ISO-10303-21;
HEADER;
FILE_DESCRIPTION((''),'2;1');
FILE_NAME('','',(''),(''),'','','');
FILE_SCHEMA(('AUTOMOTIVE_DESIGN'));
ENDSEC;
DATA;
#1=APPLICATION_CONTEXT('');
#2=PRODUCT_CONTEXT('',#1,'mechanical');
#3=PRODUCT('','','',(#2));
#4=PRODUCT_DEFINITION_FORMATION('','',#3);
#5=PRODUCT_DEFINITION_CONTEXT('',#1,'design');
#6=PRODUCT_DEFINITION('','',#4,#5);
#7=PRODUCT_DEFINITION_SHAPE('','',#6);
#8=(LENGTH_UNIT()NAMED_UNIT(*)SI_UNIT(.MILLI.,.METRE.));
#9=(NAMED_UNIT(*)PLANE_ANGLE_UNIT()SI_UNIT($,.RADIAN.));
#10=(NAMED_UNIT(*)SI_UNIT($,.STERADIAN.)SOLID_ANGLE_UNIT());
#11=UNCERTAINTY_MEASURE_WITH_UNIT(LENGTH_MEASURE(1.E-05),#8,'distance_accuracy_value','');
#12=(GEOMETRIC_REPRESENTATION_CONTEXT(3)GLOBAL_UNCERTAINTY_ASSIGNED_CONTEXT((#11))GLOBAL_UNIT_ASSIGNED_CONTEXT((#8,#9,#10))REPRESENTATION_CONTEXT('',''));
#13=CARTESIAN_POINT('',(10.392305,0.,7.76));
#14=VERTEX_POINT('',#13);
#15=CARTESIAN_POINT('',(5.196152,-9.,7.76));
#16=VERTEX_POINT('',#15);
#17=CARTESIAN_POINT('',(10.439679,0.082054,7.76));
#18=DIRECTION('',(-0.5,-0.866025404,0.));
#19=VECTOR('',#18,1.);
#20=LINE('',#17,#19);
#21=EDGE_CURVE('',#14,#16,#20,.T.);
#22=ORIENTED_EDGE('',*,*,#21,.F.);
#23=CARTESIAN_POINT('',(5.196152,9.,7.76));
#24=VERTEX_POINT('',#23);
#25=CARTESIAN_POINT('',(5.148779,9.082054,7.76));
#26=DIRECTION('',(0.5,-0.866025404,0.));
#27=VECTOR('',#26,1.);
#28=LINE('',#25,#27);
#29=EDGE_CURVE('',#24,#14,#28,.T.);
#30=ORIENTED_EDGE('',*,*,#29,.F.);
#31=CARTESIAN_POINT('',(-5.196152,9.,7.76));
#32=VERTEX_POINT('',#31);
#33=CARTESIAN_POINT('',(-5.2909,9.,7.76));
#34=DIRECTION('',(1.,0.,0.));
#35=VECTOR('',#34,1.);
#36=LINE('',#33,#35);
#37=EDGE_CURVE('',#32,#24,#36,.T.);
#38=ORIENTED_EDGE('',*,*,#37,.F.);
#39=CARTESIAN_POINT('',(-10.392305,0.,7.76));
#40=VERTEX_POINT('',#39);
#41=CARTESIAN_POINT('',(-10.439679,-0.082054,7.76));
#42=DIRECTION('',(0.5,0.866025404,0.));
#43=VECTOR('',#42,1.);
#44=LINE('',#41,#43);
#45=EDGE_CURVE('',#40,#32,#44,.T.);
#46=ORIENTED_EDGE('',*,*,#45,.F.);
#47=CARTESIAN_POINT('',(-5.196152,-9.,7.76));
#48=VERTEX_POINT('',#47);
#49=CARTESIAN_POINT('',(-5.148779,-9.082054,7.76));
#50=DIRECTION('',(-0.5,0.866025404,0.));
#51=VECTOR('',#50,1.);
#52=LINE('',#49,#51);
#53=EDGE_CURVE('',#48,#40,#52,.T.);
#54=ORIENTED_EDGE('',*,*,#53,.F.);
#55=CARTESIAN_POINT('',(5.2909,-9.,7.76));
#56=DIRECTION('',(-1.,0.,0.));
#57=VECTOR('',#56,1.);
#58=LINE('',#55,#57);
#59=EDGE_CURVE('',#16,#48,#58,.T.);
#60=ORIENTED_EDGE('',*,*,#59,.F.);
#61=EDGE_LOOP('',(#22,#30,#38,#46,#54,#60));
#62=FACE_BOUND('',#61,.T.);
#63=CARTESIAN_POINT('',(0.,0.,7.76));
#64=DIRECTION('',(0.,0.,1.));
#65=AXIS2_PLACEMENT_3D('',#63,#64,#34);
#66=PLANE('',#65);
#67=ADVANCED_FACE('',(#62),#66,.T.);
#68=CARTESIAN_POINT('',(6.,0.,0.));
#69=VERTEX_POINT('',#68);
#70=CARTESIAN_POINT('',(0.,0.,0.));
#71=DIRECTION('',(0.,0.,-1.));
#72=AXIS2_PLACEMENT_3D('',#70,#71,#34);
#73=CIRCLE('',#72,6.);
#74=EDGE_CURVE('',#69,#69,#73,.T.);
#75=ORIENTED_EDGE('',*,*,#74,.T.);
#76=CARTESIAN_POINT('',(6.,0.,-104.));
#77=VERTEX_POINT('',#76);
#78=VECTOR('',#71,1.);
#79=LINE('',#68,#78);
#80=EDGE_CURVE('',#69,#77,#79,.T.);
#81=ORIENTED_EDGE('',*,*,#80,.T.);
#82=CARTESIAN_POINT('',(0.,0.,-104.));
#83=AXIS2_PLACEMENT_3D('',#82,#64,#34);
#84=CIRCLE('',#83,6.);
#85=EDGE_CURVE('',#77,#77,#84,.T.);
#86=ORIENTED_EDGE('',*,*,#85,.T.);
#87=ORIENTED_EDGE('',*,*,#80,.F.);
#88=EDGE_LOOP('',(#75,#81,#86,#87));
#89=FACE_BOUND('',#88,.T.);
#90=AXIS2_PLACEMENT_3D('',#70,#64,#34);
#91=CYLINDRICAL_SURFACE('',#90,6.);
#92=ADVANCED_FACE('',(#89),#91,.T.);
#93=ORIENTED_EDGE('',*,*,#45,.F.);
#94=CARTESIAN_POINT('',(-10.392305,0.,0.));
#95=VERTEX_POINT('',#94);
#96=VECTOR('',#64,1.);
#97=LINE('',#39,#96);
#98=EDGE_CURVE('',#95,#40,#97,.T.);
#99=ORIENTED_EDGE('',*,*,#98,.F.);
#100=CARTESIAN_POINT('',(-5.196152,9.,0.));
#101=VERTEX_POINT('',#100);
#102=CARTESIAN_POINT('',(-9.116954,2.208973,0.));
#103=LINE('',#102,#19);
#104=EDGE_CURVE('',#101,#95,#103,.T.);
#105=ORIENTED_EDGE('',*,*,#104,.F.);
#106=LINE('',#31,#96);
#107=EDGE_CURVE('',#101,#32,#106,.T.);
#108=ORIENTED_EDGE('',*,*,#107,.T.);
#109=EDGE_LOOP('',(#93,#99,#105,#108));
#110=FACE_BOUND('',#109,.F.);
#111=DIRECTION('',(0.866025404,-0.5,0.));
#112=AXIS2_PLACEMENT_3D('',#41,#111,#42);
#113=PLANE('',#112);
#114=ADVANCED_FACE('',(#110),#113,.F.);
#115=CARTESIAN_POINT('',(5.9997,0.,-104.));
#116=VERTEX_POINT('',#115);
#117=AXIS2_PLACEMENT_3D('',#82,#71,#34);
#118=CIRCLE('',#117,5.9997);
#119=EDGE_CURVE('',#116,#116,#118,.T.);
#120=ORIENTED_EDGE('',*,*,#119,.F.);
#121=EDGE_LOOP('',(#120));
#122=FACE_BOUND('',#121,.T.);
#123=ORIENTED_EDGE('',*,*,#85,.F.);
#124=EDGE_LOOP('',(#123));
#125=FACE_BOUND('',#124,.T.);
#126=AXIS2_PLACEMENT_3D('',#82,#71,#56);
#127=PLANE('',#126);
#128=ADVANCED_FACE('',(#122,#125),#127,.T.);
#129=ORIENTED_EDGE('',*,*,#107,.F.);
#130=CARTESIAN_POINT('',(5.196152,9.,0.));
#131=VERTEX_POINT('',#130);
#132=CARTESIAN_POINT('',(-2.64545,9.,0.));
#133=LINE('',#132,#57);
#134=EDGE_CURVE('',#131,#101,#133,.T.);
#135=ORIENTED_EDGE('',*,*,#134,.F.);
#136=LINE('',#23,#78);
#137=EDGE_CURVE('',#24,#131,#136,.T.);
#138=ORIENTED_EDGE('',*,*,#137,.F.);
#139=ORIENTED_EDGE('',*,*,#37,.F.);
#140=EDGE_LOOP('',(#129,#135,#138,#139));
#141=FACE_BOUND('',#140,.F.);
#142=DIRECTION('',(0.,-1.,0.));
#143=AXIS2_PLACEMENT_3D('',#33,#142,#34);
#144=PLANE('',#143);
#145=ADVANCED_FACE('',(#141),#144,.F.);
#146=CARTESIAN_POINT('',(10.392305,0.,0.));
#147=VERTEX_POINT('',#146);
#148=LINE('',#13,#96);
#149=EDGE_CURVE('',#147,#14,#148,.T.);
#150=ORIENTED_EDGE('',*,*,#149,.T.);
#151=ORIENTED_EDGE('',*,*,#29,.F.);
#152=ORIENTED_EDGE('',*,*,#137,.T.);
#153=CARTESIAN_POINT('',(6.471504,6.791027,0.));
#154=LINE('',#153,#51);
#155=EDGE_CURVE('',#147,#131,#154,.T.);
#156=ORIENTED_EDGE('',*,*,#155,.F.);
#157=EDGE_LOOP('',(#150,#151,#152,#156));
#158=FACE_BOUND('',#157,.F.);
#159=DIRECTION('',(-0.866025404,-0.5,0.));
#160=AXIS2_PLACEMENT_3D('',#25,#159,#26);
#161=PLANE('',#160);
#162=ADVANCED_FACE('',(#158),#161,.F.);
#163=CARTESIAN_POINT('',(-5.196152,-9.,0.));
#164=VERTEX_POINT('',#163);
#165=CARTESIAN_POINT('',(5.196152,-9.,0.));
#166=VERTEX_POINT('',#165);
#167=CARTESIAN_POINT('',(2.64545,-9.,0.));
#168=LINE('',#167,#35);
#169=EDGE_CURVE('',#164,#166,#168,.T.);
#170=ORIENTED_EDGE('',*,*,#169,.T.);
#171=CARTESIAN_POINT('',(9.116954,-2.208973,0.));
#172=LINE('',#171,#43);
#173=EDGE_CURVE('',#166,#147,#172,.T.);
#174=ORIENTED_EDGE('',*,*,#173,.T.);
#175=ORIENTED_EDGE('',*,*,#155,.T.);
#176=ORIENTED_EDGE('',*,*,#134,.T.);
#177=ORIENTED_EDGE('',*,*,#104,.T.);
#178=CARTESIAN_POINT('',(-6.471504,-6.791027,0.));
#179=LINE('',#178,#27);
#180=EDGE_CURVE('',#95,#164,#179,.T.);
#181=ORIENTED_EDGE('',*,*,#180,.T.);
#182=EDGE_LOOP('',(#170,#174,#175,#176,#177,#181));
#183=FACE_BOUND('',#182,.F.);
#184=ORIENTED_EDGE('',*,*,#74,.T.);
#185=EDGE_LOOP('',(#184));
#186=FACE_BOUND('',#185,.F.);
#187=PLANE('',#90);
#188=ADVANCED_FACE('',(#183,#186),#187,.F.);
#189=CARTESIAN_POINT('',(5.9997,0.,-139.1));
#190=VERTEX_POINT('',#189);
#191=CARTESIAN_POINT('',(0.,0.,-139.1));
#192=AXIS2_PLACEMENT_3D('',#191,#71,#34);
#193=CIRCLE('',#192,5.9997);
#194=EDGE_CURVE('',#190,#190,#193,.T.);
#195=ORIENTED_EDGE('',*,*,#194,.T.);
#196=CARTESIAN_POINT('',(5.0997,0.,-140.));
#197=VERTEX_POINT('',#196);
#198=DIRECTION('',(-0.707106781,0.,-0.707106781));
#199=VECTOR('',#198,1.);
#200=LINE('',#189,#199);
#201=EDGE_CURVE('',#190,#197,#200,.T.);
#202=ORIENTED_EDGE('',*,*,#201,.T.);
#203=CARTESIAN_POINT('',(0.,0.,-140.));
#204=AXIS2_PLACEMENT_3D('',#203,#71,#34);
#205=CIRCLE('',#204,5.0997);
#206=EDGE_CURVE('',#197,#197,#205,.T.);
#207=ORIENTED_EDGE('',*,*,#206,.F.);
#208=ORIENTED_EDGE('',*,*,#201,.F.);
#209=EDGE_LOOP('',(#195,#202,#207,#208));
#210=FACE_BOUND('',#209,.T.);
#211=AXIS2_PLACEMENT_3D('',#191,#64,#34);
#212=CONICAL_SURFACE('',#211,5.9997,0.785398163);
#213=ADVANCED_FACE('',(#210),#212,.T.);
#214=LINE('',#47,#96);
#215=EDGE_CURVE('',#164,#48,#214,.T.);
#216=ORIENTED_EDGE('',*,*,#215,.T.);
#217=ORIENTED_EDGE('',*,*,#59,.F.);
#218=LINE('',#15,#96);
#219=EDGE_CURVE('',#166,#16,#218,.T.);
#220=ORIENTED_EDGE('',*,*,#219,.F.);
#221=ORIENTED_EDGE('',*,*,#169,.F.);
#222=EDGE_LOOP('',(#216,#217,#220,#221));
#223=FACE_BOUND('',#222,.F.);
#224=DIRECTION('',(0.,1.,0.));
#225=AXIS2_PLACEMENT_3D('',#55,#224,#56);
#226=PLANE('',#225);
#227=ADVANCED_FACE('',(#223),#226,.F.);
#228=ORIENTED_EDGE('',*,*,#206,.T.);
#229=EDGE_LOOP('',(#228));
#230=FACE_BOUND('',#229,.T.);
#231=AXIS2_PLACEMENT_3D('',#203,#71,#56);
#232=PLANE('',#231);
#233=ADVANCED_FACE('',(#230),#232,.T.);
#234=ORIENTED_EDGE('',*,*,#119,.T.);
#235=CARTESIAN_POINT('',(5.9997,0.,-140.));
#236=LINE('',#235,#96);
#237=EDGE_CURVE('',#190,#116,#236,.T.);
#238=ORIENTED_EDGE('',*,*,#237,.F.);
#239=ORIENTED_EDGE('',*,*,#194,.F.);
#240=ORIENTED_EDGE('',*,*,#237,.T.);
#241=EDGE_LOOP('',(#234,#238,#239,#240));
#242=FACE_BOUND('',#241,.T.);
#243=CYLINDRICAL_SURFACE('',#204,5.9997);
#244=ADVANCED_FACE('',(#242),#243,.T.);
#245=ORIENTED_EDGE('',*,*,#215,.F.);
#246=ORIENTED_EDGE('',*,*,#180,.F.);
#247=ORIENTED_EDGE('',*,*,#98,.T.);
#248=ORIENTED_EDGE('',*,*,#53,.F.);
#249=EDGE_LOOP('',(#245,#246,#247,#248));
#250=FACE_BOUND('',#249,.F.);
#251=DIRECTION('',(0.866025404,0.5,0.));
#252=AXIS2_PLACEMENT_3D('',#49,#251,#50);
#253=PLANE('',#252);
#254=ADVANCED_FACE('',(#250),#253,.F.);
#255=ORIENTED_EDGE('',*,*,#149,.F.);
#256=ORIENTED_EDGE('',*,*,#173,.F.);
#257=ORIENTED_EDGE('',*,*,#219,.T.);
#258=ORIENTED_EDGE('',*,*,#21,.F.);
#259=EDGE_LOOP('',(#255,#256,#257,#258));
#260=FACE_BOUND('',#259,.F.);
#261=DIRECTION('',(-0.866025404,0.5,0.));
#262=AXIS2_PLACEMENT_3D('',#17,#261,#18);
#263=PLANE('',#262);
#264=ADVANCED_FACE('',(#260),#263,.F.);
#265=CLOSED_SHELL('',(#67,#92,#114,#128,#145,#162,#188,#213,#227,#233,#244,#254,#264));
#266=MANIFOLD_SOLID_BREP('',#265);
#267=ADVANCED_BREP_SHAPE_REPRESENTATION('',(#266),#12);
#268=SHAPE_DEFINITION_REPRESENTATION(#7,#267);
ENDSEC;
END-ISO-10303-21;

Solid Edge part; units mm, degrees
sketch "Sketch1" plane through (0, 0, 0) normal (0, 0, 1) x (1, 0, 0)
  circle A0 centre (0, 0) radius 10.44
  dimension "D1" = 20.88
extrude "Protrusion1" add sketch "Sketch1" along normal blind 7.76
sketch "Sketch2" plane through (0, 0, 0) normal (0, 0, -1) x (1, 0, 0)
  circle A0 centre (0, 0) radius 6
extrude "Protrusion2" add sketch "Sketch2" along normal blind 140
sketch "Sketch3" plane through (0, 0, -140) normal (0, 0, -1) x (1, 0, 0)
  circle A0 centre (0, 0) radius 5.9997
extrude "Cutout1" cut sketch "Sketch3" against normal blind 36 flip side to cut
chamfer "Chamfer_1" distance 0.9 angle 45 1 edges at (-5.9997, 0, -140)
sketch "Sketch4" plane through (0, 0, 7.76) normal (0, 0, 1) x (1, 0, 0)
  line L0 (-5.2909, 9) -> (5.2909, 9)
  dimension "D1" = 18
extrude "Cutout2" cut sketch "Sketch4" against normal up to next material side at (0, 9.05, 7.76)
pattern_circular "Pattern1" count 6 over 360 about axis through (0, 0, 7.76) along (0, 0, 1) of "Cutout2"
properties part number "24104763"
